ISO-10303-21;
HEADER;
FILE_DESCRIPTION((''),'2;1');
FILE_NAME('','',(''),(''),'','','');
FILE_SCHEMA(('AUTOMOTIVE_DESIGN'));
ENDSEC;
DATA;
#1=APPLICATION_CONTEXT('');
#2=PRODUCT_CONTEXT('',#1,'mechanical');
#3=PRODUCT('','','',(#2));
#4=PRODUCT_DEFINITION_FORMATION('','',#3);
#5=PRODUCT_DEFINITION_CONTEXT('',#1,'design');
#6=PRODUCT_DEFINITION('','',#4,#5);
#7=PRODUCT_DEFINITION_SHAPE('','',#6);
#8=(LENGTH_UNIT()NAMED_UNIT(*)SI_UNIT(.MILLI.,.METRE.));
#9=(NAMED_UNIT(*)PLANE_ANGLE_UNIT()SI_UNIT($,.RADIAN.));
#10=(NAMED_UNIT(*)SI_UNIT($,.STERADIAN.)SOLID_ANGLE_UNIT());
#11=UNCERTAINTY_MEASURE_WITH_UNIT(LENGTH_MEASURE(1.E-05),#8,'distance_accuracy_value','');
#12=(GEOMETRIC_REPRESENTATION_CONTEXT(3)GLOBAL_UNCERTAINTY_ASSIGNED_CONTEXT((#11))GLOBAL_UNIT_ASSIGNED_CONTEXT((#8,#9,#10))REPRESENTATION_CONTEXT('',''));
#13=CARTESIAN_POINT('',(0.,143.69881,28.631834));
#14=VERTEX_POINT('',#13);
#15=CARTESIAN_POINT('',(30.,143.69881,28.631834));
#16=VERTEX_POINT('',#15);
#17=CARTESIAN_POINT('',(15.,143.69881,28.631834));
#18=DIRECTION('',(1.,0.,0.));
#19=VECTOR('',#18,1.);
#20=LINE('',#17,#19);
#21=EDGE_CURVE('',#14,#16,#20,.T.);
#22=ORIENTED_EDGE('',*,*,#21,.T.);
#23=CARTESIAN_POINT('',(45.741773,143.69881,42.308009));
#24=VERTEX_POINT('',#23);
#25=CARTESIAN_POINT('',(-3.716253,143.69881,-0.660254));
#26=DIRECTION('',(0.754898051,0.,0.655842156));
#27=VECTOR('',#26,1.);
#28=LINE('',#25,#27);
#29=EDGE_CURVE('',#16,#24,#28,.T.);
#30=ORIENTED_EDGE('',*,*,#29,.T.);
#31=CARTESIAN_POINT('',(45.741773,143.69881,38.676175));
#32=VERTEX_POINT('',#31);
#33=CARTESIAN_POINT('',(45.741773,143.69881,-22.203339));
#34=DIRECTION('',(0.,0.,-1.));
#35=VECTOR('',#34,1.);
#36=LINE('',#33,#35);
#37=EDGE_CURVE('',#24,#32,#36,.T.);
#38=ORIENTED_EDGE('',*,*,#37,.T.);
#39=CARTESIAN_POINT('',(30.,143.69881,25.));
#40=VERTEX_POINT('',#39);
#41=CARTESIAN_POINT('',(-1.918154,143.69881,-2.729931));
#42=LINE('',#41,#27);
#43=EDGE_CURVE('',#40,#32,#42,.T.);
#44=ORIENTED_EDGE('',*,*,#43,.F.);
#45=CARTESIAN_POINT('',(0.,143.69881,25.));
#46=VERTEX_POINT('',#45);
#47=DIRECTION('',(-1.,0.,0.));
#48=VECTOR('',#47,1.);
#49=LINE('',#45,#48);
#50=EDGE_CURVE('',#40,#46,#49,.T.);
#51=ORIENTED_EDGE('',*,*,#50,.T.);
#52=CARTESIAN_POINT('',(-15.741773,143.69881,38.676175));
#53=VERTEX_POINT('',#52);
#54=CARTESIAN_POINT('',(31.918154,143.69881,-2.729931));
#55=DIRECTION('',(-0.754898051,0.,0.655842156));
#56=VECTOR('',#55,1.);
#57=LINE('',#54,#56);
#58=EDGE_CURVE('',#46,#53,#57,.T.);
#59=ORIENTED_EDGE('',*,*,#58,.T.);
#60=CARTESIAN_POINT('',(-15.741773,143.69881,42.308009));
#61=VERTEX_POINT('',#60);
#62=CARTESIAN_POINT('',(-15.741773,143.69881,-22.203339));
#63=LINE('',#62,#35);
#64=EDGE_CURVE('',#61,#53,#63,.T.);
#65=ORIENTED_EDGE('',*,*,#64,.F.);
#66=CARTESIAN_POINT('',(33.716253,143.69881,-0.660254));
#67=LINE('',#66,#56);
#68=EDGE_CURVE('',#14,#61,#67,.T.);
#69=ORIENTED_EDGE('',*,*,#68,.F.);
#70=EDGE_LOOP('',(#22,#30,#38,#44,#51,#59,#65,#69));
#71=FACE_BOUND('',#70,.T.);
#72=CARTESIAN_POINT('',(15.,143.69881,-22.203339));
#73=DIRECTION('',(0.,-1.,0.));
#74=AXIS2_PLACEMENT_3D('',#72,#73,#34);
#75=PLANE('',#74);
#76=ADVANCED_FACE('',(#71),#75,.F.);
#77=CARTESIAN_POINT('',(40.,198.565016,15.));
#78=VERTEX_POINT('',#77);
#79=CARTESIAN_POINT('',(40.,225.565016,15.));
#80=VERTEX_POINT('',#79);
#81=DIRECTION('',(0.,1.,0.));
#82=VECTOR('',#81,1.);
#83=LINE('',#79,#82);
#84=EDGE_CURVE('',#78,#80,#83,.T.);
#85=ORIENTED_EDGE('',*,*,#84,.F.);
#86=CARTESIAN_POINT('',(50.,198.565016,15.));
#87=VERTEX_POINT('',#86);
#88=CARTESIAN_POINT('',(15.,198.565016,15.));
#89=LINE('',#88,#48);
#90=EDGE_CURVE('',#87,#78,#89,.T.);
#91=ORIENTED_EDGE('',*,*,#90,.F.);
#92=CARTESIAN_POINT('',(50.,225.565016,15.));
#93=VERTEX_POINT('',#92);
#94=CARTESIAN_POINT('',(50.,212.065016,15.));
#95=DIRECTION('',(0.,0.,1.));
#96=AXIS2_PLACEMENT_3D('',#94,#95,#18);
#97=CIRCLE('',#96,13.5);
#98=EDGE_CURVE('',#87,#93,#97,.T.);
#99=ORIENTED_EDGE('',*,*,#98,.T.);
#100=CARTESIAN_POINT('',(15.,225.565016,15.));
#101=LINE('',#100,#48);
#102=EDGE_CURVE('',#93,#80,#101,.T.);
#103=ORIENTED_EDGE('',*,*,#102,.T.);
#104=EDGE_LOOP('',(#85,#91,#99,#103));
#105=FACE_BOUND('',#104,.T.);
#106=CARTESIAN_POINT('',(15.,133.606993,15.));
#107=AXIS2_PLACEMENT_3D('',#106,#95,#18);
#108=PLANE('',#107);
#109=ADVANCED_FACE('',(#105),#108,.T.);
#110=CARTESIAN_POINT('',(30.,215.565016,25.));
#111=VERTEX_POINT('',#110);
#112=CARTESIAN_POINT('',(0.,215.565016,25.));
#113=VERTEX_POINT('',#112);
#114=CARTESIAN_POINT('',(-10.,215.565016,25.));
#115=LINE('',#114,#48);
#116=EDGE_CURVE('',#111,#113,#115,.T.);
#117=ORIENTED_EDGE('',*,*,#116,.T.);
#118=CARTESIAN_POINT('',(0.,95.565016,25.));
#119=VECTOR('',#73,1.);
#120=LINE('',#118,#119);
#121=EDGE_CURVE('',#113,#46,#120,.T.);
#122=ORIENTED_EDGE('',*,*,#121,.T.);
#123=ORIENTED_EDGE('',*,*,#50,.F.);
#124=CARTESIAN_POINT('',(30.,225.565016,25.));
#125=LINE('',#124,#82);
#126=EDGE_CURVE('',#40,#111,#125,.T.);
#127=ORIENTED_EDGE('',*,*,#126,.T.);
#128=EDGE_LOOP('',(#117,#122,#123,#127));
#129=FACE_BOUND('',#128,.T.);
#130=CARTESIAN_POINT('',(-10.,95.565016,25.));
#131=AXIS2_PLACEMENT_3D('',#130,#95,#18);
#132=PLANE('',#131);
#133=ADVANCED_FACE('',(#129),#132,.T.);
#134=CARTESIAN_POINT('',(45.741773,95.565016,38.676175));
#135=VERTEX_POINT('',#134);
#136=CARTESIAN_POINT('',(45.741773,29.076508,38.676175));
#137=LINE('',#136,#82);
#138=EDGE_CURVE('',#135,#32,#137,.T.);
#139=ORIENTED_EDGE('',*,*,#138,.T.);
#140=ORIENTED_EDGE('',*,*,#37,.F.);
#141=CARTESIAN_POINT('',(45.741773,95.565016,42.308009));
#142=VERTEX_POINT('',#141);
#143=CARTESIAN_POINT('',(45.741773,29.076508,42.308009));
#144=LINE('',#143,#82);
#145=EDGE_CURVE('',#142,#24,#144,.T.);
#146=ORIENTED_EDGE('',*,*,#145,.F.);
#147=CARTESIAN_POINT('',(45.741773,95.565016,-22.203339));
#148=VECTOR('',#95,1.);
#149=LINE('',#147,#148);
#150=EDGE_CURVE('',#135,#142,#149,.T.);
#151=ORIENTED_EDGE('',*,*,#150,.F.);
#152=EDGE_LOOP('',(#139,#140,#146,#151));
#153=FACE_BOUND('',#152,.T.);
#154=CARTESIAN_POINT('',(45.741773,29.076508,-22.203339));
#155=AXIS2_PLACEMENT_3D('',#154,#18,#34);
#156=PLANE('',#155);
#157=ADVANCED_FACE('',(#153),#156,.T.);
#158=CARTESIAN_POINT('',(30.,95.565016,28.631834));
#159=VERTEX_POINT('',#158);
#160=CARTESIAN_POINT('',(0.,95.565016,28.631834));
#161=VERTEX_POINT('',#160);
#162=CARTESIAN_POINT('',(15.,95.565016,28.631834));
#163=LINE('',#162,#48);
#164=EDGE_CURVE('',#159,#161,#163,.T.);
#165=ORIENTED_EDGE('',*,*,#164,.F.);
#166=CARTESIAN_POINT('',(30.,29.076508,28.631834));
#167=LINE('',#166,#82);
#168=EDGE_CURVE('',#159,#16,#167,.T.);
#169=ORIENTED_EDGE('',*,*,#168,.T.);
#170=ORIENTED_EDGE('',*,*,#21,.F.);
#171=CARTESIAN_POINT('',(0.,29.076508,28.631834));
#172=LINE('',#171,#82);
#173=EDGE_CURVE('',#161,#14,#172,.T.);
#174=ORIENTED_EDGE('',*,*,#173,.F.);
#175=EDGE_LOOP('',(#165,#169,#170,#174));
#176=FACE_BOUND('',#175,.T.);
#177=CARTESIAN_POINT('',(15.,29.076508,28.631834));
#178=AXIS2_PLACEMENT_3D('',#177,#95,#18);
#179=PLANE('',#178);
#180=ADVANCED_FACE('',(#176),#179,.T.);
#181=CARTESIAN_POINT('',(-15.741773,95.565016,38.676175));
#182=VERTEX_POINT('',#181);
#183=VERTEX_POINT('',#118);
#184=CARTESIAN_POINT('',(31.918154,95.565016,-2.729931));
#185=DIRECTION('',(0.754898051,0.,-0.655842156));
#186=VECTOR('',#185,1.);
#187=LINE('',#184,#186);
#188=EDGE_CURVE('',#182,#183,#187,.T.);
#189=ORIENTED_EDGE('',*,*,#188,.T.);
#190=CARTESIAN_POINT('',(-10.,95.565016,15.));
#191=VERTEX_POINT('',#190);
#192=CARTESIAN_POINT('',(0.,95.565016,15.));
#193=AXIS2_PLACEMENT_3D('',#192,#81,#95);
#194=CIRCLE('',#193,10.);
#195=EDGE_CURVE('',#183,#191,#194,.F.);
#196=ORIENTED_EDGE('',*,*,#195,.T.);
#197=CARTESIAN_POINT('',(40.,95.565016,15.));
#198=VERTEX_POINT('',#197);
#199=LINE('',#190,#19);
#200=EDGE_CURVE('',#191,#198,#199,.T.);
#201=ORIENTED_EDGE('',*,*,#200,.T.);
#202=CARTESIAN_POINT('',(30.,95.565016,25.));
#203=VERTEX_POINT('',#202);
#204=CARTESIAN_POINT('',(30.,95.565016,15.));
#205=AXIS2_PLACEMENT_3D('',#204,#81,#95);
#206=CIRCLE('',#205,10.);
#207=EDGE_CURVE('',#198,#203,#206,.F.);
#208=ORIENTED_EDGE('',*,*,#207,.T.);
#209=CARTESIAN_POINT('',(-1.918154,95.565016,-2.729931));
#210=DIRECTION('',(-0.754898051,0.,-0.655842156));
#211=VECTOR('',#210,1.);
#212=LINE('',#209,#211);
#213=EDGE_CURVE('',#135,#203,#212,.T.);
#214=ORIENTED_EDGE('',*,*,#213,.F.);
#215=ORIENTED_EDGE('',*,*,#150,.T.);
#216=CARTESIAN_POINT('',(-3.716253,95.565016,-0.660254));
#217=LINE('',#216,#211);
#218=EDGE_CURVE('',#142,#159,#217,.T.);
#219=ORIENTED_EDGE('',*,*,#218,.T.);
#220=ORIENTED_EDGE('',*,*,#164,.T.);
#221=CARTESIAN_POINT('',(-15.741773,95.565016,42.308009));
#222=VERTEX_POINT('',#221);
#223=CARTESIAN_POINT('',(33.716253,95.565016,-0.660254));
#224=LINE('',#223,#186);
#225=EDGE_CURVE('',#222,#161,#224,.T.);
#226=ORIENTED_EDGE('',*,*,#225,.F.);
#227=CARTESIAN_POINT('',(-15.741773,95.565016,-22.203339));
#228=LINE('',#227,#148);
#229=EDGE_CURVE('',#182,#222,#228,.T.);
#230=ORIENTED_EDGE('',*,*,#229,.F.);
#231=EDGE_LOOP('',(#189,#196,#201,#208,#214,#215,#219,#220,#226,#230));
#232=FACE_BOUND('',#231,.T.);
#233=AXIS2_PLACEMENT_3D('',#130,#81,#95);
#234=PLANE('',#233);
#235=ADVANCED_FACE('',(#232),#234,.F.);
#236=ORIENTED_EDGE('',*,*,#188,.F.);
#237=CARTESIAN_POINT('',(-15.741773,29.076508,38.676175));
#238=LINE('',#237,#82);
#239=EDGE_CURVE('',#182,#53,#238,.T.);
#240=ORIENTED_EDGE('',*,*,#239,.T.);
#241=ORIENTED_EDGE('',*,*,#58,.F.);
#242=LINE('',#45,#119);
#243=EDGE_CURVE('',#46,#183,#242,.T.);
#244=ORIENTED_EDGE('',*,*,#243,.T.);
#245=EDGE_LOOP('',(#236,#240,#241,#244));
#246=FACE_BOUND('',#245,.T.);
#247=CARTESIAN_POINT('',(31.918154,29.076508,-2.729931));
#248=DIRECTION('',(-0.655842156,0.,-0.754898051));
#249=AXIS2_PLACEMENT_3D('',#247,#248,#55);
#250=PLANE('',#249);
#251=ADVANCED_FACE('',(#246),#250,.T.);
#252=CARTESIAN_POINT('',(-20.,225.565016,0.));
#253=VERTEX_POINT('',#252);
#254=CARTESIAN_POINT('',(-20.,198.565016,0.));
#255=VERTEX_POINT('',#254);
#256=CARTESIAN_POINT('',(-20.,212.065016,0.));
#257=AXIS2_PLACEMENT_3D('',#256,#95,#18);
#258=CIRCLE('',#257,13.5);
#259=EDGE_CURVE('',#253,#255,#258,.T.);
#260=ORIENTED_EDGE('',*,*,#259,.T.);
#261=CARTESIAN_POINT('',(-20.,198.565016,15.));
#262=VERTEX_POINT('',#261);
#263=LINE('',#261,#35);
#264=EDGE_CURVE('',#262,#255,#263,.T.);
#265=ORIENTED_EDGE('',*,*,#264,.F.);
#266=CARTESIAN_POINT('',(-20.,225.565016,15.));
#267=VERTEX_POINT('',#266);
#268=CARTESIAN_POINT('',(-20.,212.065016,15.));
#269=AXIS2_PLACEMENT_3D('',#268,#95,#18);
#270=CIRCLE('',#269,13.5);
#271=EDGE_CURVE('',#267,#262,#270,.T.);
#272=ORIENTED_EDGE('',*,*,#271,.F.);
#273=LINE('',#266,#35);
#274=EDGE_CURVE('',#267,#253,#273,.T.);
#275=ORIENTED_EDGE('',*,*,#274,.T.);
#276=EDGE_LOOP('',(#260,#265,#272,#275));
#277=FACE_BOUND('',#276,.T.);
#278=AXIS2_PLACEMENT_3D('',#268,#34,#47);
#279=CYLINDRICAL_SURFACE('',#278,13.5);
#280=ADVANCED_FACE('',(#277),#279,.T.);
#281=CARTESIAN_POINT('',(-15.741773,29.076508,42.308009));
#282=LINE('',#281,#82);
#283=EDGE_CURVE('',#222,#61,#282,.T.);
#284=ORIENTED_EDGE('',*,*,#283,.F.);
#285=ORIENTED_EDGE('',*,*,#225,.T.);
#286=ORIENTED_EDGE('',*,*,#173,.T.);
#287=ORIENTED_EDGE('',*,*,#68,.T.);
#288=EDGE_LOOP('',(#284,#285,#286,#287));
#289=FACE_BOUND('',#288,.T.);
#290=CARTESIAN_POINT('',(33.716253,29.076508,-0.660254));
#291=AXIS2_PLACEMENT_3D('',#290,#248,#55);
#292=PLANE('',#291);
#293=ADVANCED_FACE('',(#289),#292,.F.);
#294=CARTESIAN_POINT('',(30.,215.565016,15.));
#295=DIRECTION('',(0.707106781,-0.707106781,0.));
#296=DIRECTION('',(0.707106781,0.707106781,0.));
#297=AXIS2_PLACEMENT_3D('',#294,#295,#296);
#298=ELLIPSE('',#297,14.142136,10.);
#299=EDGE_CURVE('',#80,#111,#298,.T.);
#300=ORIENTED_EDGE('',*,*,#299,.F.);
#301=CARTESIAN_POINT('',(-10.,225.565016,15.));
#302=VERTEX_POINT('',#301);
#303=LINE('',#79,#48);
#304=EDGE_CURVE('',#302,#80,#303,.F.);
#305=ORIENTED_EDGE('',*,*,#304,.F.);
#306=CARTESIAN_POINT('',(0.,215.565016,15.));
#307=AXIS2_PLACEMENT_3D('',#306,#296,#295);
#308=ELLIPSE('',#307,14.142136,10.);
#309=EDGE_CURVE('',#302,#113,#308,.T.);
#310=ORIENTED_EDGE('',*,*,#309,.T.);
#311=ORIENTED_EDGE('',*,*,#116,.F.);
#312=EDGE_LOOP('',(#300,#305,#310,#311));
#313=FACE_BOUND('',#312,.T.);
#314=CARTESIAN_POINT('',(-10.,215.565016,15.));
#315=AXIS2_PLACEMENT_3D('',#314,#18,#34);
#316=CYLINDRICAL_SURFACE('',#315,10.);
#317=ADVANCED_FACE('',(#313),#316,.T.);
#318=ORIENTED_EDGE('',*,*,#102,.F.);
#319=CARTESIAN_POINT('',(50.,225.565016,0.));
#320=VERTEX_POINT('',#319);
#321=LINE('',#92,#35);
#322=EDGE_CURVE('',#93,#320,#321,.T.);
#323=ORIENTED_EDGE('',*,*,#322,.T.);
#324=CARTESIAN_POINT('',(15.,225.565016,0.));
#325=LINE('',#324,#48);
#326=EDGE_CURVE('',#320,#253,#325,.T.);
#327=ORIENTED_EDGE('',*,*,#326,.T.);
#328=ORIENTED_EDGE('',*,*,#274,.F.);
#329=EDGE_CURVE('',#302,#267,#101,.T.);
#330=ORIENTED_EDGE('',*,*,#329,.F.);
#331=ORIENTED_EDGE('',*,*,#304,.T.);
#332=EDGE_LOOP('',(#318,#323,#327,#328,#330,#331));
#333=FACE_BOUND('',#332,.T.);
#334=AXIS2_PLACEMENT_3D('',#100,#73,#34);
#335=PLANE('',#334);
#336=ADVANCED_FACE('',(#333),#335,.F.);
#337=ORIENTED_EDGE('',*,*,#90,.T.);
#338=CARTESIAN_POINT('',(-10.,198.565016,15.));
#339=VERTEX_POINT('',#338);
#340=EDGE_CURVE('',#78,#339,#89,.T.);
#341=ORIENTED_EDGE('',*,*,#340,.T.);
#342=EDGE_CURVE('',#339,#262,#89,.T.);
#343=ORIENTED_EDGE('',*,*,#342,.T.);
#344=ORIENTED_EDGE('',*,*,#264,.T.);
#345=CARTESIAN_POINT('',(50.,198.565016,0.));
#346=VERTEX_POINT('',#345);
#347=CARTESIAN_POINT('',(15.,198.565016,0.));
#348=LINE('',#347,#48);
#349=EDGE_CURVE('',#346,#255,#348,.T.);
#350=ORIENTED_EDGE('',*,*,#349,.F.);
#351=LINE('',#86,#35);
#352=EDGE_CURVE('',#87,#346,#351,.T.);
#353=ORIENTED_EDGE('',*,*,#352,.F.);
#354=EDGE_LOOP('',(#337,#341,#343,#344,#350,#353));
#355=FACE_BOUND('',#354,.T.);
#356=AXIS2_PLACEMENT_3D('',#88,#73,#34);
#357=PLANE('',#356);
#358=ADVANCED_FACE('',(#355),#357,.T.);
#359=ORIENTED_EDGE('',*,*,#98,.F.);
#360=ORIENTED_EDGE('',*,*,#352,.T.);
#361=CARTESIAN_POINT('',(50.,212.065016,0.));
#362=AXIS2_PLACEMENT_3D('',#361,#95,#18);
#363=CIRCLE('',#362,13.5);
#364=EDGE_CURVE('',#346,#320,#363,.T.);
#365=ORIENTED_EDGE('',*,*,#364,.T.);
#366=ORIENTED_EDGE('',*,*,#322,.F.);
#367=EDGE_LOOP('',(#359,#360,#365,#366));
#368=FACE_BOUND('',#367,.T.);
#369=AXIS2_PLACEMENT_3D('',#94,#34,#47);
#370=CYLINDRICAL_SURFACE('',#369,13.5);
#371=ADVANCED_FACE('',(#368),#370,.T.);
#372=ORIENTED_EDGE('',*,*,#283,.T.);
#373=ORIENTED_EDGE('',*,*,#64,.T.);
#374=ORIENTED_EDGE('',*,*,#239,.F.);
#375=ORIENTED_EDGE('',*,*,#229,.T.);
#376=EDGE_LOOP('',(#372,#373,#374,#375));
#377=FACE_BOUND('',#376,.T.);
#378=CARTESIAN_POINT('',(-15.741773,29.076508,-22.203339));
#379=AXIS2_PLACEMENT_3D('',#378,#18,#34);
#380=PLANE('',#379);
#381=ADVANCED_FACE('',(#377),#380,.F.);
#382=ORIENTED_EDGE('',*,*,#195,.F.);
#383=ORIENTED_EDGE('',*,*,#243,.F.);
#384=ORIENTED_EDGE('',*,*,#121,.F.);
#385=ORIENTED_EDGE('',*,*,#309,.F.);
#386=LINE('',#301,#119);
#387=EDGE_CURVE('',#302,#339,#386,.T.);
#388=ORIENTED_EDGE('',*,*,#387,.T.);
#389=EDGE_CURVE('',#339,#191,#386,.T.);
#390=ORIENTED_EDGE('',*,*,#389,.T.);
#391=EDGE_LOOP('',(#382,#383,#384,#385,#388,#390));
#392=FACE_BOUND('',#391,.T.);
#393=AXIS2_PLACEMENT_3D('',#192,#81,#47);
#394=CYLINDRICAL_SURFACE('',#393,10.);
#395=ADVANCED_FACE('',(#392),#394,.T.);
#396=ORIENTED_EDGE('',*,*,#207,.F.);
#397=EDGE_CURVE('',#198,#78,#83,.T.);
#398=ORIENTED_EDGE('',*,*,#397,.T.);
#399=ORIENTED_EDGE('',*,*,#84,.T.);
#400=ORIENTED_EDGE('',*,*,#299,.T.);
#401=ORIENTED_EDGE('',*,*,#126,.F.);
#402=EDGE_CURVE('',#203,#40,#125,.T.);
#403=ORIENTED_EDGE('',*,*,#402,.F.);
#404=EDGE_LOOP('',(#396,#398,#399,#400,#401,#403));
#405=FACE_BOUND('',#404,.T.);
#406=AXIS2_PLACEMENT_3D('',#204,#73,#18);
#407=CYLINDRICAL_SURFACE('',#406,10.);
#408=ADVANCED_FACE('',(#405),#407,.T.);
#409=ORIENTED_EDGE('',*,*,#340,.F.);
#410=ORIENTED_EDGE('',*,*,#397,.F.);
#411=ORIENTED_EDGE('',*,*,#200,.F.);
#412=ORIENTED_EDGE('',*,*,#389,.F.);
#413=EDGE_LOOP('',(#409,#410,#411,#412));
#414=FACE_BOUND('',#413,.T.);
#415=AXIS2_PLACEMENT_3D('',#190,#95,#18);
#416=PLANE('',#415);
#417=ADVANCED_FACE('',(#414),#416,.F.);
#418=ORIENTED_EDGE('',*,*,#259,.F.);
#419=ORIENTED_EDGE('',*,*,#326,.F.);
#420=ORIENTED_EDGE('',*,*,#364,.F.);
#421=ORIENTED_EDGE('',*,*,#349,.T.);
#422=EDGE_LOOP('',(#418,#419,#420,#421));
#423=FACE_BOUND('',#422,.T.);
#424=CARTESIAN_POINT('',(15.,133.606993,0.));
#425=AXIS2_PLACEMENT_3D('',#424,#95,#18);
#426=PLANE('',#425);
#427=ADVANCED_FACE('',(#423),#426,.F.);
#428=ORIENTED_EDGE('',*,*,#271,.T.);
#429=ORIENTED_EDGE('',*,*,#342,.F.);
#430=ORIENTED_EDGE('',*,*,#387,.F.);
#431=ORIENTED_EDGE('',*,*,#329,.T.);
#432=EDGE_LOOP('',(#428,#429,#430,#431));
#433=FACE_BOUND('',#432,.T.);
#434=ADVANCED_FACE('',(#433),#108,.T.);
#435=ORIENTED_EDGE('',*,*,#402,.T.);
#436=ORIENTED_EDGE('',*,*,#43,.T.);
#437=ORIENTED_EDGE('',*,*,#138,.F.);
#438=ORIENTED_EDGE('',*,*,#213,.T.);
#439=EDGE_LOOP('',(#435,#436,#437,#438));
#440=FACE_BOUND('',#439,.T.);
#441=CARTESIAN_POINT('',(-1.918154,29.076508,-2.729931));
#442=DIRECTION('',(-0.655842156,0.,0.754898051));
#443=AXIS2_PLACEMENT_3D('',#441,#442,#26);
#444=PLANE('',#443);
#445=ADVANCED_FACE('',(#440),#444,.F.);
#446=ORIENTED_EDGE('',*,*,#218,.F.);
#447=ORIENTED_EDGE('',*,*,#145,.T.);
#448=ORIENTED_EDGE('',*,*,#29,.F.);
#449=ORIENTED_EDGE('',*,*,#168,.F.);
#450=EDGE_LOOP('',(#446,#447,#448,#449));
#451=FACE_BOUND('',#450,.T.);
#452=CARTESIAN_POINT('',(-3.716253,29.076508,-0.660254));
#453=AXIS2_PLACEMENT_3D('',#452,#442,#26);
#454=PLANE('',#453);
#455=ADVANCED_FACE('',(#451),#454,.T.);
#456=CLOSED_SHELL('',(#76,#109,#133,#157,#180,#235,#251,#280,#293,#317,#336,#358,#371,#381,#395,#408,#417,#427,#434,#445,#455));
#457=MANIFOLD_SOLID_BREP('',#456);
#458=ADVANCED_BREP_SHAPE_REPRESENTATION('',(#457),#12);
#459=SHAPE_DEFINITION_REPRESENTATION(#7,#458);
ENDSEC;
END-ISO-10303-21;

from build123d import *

# Parameters (mm, degrees)
EXTRUDE1_DEPTH = 15
SKETCH2_W      = 50
SKETCH2_H      = 130
EXTRUDE2_DEPTH = 10
FILLET1_R      = 10
SKETCH3_W      = 30
SKETCH3_H      = 48.133793791
EXTRUDE3_DEPTH = 8
SKETCH4_W      = 15
SKETCH4_H      = 3.631833837
EXTRUDE4_DEPTH = 48.133793792


with BuildPart() as part:
    # Sketch1 → Extrude1 (new body)
    with BuildSketch(Plane.XY):
        with BuildLine():
            Line((50, 198.565015772), (-20, 198.565015772))
            ThreePointArc((-20, 198.565015772), (-33.5, 212.065015772), (-20, 225.565015772))
            Line((-20, 225.565015772), (50, 225.565015772))
            ThreePointArc((50, 225.565015772), (63.5, 212.065015772), (50, 198.565015772))
        make_face()
    extrude(amount=EXTRUDE1_DEPTH)

    # Sketch2 → Extrude2 (add)
    with BuildSketch(Plane.XY.offset(15)):
        with Locations((15, 160.565015772)):
            Rectangle(SKETCH2_W, SKETCH2_H)
    extrude(amount=EXTRUDE2_DEPTH)

    # Fillet1
    fillet1_edges = [part.edges().sort_by_distance(p)[0] for p in [
        (40, 160.565015772, 25),
        (-10, 160.565015772, 25),
        (15, 225.565015772, 25),
    ]]
    fillet(fillet1_edges, radius=FILLET1_R - 0.0001)  # a hair under: the kernel refuses the full size

    # Sketch3 → Extrude3 (cut)
    with BuildSketch(Plane.XY.offset(25)):
        with Locations((15, 119.631912668)):
            Rectangle(SKETCH3_W, SKETCH3_H)
    extrude(amount=-EXTRUDE3_DEPTH, mode=Mode.SUBTRACT)

    # Sketch4 → Extrude4 (add)
    with BuildSketch(Plane.XZ.offset(-143.698809563)):
        Polygon((30, 17), (30, 25), (15, 25), (0, 25), (0, 17), align=None)
        with Locations((22.5, 26.815916919)):
            Rectangle(SKETCH4_W, SKETCH4_H)
        with Locations((7.5, 26.815916919)):
            Rectangle(SKETCH4_W, SKETCH4_H)
        Polygon((0, 25), (0, 28.631833837), (-15.741772737, 42.308009261), (-15.741772737, 38.676175424), align=None)
        Polygon((45.741772737, 42.308009261), (45.741772737, 38.676175424), (30, 25), (30, 28.631833837), align=None)
    extrude(amount=EXTRUDE4_DEPTH)


solid = part.part
